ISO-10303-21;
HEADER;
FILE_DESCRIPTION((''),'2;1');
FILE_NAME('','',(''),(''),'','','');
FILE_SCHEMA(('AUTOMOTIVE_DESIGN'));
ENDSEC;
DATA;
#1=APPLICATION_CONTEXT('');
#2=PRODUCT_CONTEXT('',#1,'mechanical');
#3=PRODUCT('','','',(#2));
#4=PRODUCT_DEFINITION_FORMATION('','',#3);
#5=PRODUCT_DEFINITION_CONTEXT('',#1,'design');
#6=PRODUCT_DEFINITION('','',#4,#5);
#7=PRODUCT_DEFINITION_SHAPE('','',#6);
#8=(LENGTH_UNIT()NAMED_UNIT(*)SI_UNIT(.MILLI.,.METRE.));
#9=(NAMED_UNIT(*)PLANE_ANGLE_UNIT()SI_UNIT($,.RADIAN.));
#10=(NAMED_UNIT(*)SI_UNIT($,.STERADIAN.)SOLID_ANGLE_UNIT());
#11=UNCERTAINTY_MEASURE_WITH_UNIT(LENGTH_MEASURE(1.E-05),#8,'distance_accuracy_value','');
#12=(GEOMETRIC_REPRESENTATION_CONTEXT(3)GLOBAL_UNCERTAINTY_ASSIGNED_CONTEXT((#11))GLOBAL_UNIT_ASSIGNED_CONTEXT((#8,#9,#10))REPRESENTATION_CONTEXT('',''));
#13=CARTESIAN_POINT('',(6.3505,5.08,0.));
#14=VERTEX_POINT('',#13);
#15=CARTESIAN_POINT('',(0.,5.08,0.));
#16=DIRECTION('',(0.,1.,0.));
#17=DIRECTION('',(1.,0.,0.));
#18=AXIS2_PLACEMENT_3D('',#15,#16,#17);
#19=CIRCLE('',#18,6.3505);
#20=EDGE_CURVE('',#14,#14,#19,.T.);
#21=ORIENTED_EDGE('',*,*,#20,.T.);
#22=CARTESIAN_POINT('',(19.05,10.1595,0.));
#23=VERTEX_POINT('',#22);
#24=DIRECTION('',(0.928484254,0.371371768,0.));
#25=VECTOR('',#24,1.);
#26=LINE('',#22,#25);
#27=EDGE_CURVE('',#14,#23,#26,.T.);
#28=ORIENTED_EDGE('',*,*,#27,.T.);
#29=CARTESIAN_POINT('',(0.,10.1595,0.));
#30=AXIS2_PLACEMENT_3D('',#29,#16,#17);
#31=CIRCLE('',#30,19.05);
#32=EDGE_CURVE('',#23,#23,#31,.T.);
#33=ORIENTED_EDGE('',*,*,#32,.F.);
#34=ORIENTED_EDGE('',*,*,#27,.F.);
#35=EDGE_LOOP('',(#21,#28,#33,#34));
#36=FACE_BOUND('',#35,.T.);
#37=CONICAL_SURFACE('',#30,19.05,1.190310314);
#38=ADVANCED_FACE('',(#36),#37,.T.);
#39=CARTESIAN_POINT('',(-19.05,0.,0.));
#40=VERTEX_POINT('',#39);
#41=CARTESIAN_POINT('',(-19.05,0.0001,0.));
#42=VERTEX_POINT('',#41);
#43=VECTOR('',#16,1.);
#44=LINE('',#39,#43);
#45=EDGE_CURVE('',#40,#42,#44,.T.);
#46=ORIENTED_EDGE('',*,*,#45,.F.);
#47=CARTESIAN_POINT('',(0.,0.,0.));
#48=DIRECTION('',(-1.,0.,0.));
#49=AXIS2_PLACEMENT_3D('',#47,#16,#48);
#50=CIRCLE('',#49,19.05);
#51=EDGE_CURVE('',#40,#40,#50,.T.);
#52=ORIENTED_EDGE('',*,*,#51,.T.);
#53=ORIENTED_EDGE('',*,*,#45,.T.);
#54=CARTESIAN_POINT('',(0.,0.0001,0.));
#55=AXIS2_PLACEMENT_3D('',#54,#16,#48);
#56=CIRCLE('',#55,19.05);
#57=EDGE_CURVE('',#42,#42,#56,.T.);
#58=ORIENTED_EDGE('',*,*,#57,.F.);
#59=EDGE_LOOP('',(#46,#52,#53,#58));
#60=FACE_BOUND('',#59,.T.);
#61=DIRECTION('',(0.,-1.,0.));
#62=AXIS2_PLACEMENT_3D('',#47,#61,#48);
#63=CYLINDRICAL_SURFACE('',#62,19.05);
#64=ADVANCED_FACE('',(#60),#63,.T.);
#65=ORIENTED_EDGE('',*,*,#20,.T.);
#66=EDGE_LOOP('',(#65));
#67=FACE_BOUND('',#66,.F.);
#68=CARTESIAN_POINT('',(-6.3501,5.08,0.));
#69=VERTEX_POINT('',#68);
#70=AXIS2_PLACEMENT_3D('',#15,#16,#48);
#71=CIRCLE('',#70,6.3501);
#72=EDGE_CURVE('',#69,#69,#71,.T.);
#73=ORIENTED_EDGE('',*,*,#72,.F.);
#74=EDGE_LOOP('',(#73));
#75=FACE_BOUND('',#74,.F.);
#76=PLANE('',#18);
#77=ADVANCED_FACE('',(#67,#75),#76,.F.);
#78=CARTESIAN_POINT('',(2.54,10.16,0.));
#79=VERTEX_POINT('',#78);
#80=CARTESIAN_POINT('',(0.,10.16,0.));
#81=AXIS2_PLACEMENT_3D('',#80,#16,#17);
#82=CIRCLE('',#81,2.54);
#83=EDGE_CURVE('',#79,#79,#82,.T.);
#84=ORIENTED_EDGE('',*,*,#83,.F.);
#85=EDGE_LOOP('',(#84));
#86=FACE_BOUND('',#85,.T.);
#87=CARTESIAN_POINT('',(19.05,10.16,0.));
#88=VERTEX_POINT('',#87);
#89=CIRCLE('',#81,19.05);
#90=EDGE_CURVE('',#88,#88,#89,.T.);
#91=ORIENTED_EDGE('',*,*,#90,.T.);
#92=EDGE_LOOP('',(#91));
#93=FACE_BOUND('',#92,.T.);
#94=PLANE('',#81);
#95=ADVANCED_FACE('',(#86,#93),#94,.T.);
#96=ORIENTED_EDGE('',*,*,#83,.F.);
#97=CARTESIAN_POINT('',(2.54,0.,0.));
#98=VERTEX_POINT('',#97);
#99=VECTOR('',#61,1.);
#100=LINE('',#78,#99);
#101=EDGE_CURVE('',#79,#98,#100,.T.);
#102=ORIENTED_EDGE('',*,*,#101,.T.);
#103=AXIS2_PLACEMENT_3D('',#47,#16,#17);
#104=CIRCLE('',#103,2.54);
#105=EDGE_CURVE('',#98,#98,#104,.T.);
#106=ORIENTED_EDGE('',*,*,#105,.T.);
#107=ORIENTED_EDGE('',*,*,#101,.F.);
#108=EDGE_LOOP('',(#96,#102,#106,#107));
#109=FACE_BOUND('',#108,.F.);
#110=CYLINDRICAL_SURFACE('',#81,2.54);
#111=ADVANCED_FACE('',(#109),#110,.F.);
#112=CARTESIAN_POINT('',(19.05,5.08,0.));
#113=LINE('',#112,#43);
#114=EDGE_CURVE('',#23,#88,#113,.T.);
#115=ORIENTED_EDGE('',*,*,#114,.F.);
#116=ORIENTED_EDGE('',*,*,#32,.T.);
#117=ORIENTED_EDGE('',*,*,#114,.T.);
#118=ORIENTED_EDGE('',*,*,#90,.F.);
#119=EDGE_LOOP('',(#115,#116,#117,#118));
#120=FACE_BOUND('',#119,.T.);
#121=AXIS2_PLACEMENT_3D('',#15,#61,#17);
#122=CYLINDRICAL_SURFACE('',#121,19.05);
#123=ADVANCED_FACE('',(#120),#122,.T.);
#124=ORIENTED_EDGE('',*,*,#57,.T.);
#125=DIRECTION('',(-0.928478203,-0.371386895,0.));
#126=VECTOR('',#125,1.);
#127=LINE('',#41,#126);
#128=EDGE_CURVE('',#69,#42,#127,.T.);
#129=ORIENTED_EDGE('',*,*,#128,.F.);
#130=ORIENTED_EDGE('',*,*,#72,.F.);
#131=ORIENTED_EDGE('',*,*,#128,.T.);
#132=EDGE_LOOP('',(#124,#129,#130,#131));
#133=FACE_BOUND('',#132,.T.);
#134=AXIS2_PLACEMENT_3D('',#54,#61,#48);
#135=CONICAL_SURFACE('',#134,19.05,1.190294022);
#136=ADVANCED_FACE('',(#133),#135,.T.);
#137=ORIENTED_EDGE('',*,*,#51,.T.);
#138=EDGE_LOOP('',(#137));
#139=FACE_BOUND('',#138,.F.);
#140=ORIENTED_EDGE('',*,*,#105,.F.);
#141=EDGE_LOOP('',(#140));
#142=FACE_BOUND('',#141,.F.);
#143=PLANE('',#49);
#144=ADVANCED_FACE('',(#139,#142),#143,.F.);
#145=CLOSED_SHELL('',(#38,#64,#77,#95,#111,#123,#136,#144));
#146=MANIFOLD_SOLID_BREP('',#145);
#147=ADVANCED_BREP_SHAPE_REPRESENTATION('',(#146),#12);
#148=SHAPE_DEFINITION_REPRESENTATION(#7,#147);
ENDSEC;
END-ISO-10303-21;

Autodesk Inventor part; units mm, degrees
ref_plane "YZ Plane" through (0, 0, 0) normal (1, 0, 0) x (0, 1, 0)
ref_plane "XZ Plane" through (0, 0, 0) normal (0, 1, 0) x (-1, 0, 0)
ref_plane "XY Plane" through (0, 0, 0) normal (0, 0, 1) x (1, 0, 0)
sketch "Sketch1" plane through (0, 0, 0) normal (0, 1, 0) x (-1, 0, 0)
  circle A0 centre (0, 0) radius 19.05
  dimension "d0" = 38.1
extrude "Extrusion1" add sketch "Sketch1" along normal blind 5.08
chamfer "Chamfer1" distance 12.7 distance2 5.08 1 edges at (19.05, 5.08, 0) measured on face at (1.7089, 5.08, -1.4667)
sketch "Sketch2" plane through (0, 5.08, 0) normal (0, 1, 0) x (1, 0, 0)
  circle A0 centre (0, 0) radius 19.05
  dimension "d6" = 38.1
extrude "Extrusion2" add sketch "Sketch2" along normal blind 5.08
chamfer "Chamfer2" distance 12.7 distance2 5.08 1 edges at (-19.05, 5.08, 0) measured on face at (14.5707, 5.08, 2.0262)
sketch "Sketch5" plane through (0, 10.16, 0) normal (0, 1, 0) x (1, 0, 0)
  circle A0 centre (0, 0) radius 2.54
  dimension "d15" = 5.08
extrude "Extrusion4" cut sketch "Sketch5" against normal blind 10.16
properties part number "Pulley V2"
